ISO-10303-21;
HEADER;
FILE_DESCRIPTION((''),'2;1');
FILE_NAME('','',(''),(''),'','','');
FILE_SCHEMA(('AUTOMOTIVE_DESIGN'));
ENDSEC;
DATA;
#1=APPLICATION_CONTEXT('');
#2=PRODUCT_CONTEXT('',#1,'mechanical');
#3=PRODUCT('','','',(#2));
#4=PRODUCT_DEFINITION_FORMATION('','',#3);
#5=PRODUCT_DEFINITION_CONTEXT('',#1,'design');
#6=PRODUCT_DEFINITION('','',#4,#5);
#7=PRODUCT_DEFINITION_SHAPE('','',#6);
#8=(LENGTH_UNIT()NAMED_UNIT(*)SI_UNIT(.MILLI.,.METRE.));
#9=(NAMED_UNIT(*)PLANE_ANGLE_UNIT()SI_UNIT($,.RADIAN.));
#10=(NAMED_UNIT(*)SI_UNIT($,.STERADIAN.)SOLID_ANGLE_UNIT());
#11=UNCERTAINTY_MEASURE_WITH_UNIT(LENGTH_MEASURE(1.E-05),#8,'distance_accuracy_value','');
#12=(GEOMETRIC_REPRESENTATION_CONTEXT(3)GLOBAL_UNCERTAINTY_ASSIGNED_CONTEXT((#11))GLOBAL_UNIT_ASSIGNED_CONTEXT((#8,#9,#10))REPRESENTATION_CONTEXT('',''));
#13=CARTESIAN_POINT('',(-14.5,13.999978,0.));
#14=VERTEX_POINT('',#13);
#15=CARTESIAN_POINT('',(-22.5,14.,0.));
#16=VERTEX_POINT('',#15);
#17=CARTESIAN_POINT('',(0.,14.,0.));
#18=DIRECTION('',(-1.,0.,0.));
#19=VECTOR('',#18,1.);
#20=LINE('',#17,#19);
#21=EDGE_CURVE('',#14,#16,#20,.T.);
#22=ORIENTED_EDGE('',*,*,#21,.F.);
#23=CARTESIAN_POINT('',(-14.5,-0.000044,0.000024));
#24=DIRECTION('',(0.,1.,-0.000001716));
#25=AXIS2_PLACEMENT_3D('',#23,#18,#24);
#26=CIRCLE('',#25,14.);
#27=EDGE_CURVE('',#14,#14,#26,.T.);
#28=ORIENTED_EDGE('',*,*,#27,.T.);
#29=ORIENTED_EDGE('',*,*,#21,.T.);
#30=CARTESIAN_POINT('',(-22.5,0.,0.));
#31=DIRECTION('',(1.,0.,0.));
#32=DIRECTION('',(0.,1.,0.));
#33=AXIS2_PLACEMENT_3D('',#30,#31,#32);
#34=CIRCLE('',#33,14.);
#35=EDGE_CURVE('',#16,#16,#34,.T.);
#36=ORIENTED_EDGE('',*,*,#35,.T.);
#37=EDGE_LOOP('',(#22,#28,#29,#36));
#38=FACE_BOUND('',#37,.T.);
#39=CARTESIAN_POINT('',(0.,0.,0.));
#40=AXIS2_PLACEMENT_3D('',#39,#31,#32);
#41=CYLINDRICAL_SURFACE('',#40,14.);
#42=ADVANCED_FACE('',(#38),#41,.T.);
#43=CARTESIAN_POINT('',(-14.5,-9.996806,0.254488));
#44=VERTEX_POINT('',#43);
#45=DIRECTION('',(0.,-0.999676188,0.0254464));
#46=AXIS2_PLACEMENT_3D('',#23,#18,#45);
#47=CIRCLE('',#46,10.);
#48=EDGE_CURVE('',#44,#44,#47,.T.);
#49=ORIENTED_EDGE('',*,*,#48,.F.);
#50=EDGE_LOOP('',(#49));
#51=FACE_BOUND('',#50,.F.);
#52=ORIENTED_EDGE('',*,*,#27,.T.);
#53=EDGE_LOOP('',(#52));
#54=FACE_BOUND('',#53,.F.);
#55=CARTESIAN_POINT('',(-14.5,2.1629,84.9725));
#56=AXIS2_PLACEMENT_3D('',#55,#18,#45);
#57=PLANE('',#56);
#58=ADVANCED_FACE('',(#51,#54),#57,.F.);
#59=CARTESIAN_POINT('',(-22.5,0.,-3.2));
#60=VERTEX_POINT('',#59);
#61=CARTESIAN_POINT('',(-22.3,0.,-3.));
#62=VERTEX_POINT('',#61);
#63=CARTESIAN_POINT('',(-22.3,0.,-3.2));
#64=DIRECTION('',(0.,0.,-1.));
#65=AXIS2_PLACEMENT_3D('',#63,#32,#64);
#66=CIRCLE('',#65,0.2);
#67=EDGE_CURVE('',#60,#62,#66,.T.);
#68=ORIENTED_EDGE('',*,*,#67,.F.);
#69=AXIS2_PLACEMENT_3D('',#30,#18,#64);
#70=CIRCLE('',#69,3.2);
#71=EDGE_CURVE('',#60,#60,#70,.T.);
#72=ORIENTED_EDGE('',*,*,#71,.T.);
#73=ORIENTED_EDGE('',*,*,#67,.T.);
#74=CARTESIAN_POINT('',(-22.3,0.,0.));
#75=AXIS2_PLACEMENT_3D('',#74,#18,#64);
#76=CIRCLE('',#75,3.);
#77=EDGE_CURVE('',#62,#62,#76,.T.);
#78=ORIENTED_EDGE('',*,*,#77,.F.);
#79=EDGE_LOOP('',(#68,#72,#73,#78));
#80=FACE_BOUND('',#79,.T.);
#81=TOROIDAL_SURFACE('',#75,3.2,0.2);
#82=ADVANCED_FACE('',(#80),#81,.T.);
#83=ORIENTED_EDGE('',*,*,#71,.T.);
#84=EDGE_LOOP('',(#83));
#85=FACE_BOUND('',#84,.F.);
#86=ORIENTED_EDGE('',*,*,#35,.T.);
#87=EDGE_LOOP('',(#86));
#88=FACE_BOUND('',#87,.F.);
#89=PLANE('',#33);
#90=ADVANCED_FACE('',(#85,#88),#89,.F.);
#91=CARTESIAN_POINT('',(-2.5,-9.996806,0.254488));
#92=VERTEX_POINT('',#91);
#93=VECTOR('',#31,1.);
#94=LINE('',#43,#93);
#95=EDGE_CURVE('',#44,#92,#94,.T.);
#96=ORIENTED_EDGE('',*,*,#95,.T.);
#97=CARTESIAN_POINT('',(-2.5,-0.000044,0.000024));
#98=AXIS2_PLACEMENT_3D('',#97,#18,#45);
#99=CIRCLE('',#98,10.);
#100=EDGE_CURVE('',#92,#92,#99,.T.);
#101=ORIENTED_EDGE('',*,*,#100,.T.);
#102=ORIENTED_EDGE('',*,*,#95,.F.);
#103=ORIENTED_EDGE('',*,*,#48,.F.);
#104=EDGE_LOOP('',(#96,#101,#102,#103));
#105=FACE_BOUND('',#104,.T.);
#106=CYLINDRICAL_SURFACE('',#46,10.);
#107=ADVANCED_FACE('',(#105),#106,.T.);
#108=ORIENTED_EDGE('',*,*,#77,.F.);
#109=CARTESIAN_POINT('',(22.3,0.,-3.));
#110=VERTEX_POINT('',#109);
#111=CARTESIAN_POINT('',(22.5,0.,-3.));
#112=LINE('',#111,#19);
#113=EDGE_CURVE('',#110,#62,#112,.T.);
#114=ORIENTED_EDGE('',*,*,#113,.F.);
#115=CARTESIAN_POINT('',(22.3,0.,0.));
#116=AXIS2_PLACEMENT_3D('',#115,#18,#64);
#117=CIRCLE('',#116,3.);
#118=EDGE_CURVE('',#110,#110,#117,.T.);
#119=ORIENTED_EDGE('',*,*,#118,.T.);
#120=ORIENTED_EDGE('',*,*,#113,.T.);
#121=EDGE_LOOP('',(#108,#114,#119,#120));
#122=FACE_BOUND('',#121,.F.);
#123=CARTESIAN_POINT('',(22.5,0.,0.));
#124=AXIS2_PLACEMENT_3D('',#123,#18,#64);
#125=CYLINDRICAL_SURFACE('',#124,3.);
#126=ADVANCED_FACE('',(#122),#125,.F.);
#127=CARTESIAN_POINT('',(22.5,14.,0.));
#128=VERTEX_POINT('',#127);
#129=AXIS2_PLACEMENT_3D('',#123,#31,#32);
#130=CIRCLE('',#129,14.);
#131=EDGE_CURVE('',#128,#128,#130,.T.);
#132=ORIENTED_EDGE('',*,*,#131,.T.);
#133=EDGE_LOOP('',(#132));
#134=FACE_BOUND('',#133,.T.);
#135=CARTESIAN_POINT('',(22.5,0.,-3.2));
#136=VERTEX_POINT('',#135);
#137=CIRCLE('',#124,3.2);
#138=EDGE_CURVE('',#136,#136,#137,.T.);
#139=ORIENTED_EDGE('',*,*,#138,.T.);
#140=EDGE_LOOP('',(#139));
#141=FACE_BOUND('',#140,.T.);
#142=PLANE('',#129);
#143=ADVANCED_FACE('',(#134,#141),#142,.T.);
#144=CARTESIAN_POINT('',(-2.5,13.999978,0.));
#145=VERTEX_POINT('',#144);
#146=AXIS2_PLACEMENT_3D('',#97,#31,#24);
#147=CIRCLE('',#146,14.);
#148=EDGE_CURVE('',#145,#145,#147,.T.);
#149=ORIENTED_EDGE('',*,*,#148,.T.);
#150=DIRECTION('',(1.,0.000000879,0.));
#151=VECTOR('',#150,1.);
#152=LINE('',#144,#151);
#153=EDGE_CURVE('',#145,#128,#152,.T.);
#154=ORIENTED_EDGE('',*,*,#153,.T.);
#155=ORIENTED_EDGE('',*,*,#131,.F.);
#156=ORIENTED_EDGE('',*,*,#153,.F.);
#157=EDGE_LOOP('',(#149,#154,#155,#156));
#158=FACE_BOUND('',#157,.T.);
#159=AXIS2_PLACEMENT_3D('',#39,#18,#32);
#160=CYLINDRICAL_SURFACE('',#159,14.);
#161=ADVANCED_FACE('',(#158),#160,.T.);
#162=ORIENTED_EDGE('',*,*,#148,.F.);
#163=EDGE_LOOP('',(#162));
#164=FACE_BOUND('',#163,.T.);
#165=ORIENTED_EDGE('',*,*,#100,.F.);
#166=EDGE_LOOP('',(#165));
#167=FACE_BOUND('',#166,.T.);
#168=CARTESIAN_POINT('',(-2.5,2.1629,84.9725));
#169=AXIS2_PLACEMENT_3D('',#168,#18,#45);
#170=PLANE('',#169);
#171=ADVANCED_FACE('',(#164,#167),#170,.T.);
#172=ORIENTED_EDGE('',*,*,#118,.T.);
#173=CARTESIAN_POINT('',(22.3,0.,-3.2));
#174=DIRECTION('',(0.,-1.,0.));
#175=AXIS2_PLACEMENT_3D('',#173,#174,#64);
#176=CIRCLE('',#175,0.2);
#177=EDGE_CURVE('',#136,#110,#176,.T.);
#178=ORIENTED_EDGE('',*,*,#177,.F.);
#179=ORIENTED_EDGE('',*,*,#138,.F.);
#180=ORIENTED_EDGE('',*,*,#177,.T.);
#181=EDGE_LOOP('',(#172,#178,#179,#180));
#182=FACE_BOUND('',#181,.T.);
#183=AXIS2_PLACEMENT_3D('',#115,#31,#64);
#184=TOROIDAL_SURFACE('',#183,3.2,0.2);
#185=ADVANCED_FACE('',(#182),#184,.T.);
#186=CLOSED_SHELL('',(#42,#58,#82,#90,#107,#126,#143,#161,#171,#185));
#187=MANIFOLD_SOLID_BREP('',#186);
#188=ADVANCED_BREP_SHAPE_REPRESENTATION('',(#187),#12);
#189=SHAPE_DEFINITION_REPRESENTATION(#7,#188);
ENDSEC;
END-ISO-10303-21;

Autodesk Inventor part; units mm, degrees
ref_plane "YZ Plane" through (0, 0, 0) normal (1, 0, 0) x (0, 1, 0)
ref_plane "XZ Plane" through (0, 0, 0) normal (0, 1, 0) x (-1, 0, 0)
ref_plane "XY Plane" through (0, 0, 0) normal (0, 0, 1) x (1, 0, 0)
sketch "Эскиз1" plane through (0, 0, 0) normal (1, 0, 0) x (0, 1, 0)
  circle A0 centre (0, 0) radius 14
  dimension "d0" = 28
extrude "Выдавливание1" add sketch "Эскиз1" along normal mid plane 45
sketch "Эскиз2" plane through (22.5, 0, 0) normal (1, 0, 0) x (0, 0, -1)
  point P0 (0, 0)
  point P1 (0, 0)
hole "Отверстие1" at (22.5, 0, 0) direction (-1, 0, 0) diameter 6 depth 60
fillet "Сопряжение1" radius 0.2 2 edges at (22.5, 0, 3) (-22.5, 0, 3)
ref_plane "РабПлоскость2" through (-14.5, 2.1629, 84.9725) normal (-1, 0, 0) x (0, -0.9996762, 0.0254464)
sketch "Эскиз4" plane through (-14.5, 2.1629, 84.9725) normal (-1, 0, 0) x (0, -0.9996762, 0.0254464)
  circle A0 centre (0, -85) radius 10
  circle A1 centre (0, -85) radius 3.2 projected
  circle A2 centre (0, -85) radius 14
  dimension "d14" = 20
extrude "Выдавливание3" cut sketch "Эскиз4" against normal blind 12 contours A2
properties part number "Вал конвейера"
